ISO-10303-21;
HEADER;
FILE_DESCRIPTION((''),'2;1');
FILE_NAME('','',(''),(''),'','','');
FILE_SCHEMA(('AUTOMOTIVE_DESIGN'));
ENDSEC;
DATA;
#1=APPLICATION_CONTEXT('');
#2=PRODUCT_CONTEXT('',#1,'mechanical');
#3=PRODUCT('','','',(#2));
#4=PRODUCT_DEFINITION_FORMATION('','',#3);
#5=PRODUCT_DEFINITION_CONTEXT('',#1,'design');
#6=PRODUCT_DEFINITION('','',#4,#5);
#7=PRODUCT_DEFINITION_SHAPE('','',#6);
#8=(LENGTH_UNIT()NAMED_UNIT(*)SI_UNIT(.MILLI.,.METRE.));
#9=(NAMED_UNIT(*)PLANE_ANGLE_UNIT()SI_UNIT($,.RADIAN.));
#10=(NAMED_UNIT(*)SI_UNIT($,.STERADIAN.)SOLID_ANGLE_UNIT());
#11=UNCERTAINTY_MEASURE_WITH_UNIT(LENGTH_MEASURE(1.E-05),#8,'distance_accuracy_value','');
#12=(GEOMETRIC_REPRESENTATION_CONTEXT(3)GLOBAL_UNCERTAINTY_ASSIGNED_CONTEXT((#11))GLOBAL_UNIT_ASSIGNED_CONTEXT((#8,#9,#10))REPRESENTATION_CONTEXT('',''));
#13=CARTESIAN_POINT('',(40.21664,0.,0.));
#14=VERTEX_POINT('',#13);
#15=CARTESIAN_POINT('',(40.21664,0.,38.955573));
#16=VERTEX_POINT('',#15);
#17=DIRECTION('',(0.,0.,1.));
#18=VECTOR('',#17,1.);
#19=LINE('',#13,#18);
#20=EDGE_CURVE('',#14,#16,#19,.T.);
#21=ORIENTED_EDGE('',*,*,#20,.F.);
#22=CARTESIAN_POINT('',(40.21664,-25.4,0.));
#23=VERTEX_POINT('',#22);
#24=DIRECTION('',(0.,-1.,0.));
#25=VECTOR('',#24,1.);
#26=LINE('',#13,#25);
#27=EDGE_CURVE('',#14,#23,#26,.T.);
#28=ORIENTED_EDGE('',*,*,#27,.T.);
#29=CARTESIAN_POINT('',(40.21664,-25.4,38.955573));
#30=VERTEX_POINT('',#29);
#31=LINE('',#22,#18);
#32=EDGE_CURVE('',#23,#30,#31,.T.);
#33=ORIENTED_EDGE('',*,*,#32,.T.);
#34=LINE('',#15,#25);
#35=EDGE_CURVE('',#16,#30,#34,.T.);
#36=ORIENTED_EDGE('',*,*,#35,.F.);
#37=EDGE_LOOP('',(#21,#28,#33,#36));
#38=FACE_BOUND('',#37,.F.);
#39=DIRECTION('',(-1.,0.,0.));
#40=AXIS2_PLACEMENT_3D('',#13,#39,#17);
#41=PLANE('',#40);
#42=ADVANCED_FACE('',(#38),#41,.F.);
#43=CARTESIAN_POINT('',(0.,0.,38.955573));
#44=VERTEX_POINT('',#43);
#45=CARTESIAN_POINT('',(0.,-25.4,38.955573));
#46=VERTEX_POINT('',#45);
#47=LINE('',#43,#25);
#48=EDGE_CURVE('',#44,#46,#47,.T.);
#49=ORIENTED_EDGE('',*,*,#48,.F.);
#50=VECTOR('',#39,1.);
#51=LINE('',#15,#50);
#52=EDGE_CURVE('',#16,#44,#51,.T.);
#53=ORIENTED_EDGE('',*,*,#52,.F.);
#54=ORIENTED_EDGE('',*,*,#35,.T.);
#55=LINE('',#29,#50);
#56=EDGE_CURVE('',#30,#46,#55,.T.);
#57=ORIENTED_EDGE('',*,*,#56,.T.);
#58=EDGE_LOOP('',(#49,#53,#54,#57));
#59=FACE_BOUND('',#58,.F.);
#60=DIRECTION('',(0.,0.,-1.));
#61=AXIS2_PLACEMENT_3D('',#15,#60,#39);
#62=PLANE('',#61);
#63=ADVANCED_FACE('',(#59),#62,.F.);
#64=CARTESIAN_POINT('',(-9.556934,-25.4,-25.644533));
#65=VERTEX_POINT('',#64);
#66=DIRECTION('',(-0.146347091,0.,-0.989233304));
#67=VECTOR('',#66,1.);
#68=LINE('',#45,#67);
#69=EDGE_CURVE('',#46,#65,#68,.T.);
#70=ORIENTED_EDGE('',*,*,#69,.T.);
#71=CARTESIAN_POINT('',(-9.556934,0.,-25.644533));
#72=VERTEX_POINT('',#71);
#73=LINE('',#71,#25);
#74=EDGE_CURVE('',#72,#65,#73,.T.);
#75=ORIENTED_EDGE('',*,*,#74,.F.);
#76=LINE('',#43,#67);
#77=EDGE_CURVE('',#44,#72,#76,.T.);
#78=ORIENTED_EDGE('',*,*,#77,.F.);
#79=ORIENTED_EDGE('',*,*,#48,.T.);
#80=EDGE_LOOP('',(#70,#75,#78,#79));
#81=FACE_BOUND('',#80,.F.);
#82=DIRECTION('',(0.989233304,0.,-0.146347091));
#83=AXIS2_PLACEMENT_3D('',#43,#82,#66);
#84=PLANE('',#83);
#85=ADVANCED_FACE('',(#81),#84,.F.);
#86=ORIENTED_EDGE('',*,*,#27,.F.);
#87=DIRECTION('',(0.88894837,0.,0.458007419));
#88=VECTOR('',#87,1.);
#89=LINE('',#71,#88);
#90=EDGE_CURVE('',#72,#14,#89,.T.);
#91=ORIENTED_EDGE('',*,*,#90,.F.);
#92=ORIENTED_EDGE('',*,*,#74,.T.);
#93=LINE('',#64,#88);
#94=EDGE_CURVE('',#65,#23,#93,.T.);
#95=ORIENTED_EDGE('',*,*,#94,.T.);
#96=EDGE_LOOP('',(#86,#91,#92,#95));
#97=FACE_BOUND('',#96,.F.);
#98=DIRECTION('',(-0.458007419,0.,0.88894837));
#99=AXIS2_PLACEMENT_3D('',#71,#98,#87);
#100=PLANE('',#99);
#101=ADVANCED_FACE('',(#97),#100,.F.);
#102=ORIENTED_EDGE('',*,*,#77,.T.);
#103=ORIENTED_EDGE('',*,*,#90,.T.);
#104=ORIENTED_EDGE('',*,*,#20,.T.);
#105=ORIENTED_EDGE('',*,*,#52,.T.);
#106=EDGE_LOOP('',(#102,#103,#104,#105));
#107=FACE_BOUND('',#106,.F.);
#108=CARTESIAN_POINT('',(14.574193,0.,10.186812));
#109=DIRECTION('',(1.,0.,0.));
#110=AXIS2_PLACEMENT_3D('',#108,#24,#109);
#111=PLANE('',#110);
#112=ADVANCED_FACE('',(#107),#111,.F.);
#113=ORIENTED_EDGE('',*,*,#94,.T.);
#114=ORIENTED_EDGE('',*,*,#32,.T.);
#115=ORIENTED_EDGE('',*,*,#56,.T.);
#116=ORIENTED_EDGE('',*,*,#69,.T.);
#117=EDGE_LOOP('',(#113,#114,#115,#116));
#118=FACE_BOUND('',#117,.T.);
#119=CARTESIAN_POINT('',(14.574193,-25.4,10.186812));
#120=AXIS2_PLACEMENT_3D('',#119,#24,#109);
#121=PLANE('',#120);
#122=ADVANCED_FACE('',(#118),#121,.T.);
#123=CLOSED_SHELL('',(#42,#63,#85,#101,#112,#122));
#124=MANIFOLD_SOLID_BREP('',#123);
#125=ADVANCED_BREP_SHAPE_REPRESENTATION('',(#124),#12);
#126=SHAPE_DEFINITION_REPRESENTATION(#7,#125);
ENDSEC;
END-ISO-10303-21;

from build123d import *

# Parameters (mm, degrees)
F1_DEPTH = 25.4


# Not quite as in the source:
# - the program builds the solid bodies; features that only make, move or delete a surface that nothing else refers to are left out


with BuildPart() as f1:
    # F0 (on Front) → F1 (new body)
    with BuildSketch(Plane.XZ):
        Polygon((40.2166396379, 38.9555729926), (0, 38.9555729926), (-9.5569342375, -25.6445333362), (40.2166396379, 0), align=None)
    extrude(amount=F1_DEPTH)


solid = f1.part
